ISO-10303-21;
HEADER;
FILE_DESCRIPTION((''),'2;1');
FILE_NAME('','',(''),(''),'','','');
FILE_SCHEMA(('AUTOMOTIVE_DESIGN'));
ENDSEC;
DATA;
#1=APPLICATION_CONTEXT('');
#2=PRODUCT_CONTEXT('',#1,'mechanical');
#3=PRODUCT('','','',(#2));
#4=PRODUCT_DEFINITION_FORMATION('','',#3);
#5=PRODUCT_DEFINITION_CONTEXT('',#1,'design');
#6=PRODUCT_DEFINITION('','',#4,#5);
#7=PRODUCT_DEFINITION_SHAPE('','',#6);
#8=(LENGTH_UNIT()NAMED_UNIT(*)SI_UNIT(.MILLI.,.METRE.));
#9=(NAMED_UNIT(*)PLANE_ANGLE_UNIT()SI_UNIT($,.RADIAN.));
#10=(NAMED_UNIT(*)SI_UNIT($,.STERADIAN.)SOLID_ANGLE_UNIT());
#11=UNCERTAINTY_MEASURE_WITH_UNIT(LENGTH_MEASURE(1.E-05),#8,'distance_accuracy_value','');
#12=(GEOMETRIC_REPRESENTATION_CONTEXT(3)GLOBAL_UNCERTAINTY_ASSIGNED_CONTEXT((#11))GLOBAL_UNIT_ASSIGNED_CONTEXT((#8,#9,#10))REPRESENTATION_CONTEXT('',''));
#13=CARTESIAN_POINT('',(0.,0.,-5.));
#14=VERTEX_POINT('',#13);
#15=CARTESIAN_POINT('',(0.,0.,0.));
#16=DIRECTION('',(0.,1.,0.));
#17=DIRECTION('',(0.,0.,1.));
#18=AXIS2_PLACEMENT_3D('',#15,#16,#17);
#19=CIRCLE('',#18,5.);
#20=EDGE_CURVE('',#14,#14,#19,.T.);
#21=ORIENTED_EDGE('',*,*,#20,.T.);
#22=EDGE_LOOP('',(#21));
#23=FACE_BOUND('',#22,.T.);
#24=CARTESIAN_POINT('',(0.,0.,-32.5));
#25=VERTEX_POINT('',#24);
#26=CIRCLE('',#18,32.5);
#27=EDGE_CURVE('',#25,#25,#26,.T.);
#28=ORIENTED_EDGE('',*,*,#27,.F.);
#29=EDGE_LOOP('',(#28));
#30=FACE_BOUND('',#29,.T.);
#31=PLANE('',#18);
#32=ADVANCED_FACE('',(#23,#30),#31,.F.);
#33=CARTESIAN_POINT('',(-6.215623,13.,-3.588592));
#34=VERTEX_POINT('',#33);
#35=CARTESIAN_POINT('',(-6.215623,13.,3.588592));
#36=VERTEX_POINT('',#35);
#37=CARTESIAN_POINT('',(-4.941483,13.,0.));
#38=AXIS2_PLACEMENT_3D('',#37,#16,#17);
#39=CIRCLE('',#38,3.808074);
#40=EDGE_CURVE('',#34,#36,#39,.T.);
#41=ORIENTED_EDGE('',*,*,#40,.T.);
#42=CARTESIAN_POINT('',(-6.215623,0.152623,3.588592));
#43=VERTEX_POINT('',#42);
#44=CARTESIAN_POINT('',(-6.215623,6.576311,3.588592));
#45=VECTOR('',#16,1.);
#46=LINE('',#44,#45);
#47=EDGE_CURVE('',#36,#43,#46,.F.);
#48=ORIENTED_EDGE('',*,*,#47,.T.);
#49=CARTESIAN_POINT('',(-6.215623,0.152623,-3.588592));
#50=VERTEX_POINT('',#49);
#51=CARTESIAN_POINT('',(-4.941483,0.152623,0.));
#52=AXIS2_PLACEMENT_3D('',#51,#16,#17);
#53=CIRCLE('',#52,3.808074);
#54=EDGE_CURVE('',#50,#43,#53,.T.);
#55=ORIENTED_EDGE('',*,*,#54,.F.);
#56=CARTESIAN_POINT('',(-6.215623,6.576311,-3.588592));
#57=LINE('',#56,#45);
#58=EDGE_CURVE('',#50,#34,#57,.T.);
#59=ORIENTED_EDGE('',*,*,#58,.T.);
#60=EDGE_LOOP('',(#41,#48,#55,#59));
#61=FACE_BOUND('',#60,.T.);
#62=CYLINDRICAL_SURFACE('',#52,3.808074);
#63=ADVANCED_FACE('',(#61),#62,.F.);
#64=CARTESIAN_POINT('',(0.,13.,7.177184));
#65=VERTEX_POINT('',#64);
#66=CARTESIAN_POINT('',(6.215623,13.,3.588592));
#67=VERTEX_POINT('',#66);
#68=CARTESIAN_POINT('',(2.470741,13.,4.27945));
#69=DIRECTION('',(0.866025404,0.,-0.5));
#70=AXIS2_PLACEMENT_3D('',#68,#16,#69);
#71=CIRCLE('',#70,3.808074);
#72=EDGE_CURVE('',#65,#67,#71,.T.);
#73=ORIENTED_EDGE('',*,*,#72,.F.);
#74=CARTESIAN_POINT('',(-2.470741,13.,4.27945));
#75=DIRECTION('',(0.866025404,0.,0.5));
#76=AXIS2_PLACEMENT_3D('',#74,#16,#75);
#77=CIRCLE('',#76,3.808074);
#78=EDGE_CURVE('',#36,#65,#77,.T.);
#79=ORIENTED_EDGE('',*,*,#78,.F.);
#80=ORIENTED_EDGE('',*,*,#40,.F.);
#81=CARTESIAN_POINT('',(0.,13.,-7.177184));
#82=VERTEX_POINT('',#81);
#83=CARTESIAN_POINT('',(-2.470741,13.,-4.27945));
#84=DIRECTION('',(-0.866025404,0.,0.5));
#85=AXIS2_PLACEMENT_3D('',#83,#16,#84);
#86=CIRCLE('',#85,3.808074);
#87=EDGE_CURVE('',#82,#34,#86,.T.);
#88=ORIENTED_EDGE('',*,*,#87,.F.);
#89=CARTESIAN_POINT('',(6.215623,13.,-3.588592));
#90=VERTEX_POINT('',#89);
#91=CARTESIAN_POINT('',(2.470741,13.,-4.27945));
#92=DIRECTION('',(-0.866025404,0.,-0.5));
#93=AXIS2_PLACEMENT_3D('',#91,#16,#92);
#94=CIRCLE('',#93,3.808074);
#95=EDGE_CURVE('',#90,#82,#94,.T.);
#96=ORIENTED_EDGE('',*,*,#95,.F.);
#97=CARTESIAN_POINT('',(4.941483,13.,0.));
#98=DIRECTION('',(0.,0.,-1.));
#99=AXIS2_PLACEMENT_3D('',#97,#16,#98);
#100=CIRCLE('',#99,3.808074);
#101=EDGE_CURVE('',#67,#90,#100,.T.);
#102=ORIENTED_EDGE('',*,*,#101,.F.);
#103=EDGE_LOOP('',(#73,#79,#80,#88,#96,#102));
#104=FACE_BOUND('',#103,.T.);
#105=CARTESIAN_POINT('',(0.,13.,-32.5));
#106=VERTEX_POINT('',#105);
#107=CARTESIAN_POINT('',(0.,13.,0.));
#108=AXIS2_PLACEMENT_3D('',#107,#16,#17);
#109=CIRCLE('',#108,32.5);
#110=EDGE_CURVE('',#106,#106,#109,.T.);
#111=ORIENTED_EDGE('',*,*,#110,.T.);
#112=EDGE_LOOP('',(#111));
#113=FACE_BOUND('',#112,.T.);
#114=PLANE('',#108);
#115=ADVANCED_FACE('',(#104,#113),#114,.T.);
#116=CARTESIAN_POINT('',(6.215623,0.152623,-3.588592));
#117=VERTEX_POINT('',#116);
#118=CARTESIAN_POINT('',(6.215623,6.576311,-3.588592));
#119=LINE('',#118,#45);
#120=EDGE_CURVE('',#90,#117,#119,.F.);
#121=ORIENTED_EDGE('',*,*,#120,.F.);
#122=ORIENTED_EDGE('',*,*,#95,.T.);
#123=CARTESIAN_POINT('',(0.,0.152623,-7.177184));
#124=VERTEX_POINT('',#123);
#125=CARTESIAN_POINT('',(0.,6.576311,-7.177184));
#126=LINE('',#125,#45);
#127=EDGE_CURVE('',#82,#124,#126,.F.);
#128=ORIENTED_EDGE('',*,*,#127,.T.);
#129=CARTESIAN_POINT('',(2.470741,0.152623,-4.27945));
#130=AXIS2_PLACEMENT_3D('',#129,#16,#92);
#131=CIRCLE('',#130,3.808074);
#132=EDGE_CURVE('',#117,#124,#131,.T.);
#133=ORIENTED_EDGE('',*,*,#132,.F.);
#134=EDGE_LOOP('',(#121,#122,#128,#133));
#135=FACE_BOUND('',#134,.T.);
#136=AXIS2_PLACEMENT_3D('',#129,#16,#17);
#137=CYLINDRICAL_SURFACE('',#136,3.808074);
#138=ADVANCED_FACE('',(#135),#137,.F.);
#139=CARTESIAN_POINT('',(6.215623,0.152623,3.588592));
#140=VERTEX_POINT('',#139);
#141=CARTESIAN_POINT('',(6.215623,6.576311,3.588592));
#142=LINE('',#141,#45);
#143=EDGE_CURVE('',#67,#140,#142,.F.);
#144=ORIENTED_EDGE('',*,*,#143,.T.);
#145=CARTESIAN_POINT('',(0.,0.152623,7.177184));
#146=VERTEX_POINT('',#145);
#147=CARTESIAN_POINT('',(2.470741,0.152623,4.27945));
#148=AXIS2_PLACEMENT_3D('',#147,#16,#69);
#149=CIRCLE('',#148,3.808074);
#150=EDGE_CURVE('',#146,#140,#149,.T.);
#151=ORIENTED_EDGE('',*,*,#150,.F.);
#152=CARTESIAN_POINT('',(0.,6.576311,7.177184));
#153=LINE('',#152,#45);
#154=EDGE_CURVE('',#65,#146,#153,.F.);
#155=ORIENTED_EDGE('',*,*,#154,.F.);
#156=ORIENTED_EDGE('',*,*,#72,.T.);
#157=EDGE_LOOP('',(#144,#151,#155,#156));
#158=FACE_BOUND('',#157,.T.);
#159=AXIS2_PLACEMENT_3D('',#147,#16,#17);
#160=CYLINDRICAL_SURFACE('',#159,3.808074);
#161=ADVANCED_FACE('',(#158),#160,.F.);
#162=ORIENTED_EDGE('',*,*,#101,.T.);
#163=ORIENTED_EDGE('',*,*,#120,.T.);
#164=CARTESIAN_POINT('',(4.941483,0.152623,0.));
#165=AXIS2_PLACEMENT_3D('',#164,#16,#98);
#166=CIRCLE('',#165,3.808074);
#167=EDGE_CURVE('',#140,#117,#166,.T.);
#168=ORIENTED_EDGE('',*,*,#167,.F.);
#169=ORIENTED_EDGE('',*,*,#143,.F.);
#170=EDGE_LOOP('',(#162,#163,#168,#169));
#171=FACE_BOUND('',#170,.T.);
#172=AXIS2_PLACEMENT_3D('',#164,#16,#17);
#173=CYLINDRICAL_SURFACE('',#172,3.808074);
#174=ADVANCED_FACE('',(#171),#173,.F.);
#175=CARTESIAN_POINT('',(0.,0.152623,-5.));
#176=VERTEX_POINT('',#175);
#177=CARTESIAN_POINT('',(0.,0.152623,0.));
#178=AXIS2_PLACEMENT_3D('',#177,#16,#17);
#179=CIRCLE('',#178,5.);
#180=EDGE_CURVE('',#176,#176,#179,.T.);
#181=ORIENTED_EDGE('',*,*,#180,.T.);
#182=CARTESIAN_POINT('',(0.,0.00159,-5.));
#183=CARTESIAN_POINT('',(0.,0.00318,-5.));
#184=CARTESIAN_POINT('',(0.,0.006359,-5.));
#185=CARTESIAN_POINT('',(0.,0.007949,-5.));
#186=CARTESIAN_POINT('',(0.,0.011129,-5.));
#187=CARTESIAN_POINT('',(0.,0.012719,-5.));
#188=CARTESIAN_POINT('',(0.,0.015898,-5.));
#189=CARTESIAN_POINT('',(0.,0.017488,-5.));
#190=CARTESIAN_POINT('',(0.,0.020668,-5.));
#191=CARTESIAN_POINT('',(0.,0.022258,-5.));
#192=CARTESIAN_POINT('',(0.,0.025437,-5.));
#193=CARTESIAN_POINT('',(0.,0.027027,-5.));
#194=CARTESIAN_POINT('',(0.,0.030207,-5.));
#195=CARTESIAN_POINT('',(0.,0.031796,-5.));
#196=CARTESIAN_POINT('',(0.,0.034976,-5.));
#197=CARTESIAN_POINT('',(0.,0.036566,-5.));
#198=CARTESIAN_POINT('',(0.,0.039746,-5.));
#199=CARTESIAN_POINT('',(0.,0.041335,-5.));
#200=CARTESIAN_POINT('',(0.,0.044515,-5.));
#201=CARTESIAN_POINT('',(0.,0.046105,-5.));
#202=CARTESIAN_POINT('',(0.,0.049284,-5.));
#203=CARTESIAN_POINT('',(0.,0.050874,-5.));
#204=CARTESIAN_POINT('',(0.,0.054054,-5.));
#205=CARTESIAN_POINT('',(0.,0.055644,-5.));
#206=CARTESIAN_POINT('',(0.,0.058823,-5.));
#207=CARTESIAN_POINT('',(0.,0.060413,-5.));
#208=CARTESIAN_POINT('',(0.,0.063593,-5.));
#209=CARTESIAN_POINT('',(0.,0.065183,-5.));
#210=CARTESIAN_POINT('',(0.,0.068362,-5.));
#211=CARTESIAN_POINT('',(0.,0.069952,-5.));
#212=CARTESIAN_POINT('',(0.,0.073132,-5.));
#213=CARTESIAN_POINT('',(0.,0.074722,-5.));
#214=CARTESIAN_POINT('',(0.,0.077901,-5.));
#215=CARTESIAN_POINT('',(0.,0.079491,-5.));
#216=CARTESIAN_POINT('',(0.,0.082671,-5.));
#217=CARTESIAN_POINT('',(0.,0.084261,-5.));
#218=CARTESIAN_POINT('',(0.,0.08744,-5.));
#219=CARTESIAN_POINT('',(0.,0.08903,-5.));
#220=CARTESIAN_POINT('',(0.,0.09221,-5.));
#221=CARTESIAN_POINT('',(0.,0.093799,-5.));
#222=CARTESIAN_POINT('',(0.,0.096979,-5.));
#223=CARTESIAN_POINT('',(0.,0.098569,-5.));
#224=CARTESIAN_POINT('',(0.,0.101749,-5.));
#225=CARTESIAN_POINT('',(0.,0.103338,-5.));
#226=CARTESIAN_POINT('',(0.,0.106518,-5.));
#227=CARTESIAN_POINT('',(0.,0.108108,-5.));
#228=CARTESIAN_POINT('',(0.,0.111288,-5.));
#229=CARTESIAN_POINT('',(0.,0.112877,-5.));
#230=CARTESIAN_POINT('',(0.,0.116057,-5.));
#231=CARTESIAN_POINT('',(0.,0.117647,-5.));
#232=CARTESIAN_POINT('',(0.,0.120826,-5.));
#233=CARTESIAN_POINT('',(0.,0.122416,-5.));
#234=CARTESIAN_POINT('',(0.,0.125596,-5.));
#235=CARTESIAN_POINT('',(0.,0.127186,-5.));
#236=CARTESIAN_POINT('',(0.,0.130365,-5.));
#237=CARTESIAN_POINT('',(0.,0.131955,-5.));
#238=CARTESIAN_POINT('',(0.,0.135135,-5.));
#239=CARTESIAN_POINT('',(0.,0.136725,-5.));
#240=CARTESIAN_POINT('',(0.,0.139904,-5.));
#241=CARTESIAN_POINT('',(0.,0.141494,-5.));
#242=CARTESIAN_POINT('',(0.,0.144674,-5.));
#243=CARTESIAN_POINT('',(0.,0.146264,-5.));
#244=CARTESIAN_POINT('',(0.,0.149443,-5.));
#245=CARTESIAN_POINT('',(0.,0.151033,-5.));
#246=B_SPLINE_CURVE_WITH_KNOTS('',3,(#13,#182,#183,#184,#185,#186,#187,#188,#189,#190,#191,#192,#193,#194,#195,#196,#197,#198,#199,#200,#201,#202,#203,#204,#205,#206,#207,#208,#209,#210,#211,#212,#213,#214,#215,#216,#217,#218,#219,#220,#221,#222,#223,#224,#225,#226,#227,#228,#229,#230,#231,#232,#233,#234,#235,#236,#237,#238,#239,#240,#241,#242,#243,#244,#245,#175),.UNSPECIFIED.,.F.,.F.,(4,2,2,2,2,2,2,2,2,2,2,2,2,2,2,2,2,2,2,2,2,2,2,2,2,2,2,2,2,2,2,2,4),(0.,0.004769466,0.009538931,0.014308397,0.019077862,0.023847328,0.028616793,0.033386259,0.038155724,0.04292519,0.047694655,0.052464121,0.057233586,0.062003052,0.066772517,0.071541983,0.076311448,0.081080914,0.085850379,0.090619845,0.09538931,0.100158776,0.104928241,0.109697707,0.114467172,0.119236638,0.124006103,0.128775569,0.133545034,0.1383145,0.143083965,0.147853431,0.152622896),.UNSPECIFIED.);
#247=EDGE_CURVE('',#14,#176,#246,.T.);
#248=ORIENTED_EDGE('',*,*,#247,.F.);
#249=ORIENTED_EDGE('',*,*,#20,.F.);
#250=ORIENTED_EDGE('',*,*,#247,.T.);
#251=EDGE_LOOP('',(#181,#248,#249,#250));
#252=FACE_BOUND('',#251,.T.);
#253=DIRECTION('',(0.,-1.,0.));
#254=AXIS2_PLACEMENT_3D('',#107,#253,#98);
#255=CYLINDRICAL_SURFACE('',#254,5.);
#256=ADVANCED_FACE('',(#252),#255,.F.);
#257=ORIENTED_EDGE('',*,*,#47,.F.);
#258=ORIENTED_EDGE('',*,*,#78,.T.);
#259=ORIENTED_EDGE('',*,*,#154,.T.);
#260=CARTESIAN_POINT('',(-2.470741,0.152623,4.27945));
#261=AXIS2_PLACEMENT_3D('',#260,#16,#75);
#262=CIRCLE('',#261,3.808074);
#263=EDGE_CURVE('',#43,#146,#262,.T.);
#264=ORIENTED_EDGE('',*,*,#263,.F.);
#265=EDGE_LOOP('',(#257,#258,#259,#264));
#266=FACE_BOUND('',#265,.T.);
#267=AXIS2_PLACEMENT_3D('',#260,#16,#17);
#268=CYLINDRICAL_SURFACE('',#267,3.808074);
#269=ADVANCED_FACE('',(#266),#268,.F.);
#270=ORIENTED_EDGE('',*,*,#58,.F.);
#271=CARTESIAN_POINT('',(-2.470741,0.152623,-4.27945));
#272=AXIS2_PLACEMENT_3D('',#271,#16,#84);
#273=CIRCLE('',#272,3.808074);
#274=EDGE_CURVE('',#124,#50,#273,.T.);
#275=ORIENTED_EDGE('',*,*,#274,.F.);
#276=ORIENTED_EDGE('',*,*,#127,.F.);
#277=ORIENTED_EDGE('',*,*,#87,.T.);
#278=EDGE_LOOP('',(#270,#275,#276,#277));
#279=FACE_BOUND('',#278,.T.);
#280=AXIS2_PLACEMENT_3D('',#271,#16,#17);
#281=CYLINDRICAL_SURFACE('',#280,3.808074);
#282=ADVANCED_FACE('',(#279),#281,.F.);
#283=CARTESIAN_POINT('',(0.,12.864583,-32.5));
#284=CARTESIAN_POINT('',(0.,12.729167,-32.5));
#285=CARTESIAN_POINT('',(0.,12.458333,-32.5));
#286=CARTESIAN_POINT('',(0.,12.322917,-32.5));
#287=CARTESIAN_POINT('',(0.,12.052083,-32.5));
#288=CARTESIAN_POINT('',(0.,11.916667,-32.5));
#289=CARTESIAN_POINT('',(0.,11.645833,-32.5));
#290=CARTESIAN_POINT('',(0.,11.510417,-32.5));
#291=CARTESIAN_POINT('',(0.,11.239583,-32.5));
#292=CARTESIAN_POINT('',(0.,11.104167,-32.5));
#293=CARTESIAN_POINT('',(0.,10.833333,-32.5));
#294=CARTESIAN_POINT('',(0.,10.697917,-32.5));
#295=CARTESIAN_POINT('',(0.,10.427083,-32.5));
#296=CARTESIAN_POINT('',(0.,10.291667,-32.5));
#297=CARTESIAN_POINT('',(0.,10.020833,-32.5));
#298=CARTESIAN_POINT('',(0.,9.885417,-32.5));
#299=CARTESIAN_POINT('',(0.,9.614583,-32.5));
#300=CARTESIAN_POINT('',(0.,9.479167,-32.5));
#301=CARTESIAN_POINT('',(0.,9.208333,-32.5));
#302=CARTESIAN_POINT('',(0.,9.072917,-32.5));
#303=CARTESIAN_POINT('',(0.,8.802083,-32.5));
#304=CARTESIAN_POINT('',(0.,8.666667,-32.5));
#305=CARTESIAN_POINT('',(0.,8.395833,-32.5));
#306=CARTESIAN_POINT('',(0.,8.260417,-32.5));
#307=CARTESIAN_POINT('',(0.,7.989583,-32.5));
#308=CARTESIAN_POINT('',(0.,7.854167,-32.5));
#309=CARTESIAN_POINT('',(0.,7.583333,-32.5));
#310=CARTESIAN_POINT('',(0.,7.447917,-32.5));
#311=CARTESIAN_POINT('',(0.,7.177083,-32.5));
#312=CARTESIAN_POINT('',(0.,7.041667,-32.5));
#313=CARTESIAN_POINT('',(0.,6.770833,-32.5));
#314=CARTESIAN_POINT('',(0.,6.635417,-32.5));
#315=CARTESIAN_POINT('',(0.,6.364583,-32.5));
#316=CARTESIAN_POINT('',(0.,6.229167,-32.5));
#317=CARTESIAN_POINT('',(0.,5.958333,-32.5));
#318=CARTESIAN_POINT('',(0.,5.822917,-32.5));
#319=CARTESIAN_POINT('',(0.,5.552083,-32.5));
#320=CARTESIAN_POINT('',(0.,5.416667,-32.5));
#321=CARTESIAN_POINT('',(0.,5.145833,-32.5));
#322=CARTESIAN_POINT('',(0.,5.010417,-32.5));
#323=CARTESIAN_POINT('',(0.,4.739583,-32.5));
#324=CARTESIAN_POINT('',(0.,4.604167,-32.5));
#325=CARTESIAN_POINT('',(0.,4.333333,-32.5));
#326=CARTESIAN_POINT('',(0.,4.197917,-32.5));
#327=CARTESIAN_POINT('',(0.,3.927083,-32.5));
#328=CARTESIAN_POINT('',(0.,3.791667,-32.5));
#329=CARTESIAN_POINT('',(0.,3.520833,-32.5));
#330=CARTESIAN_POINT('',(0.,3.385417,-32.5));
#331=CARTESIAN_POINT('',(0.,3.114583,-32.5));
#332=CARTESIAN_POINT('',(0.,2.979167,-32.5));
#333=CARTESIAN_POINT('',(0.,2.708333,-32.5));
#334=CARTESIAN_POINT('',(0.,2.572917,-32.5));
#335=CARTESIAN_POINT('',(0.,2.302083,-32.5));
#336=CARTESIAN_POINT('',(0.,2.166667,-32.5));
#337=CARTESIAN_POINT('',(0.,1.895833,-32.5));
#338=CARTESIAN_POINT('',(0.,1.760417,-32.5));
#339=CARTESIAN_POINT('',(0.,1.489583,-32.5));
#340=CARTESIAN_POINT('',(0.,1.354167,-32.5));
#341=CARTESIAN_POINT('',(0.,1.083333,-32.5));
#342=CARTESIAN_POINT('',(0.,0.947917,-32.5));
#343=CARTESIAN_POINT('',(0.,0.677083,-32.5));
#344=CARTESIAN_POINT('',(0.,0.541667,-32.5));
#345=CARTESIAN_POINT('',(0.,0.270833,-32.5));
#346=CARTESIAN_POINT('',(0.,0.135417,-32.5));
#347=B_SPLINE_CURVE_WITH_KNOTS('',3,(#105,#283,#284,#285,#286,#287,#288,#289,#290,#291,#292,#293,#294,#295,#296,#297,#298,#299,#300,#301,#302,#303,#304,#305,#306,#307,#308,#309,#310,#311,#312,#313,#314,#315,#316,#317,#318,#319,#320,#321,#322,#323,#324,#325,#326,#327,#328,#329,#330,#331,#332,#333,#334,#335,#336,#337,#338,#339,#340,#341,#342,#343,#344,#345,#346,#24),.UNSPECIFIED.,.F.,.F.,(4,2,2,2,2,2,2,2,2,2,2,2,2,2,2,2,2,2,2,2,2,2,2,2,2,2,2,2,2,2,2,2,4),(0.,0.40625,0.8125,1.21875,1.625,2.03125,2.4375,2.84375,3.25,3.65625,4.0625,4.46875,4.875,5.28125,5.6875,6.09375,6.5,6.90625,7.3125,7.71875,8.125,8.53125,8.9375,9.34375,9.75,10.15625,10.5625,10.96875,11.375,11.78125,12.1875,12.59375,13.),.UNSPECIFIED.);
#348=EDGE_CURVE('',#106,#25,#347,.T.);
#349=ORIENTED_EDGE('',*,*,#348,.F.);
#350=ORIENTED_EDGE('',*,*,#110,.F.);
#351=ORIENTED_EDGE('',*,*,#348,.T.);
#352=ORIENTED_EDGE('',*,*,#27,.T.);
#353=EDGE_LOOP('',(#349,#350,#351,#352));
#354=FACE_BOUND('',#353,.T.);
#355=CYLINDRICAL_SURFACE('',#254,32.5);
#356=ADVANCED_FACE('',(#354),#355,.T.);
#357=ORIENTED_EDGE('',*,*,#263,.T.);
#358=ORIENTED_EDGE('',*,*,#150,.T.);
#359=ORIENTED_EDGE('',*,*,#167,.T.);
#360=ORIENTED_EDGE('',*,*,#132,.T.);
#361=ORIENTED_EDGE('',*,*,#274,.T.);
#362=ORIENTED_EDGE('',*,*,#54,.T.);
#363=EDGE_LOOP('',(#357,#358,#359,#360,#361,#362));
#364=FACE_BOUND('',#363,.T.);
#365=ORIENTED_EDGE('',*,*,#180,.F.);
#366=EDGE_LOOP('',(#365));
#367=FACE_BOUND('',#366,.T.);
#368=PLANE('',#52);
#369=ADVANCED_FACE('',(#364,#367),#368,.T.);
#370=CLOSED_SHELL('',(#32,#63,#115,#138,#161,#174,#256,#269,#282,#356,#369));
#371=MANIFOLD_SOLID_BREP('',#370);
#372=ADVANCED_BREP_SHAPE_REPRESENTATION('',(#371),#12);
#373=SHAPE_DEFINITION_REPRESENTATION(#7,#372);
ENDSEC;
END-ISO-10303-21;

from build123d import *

# Parameters (mm, degrees)
SKETCH1_R           = 32.5
BOSS_EXTRUDE1_DEPTH = 13
SKETCH2_R           = 5
CUT_EXTRUDE1_DEPTH  = 48.765049984
SKETCH3_R           = 3.808073824
CUT_EXTRUDE2_DEPTH  = 12.847377104
CIRPATTERN1_COUNT   = 6


with BuildPart() as part:
    # Sketch1 → Boss-Extrude1 (new body)
    with BuildSketch(Plane(origin=(0, 0, 0), x_dir=(1, 0, 0), z_dir=(0, 1, 0))):
        Circle(SKETCH1_R)
    extrude(amount=BOSS_EXTRUDE1_DEPTH)

    # Sketch2 → Cut-Extrude1 (cut, through all)
    with BuildSketch(Plane(origin=(0, 0, 0), x_dir=(1, 0, 0), z_dir=(0, 1, 0))):
        Circle(SKETCH2_R)
    extrude(amount=CUT_EXTRUDE1_DEPTH, mode=Mode.SUBTRACT)

    # Sketch3 → Cut-Extrude2 (cut)
    with BuildSketch(Plane(origin=(0, 13, 0), x_dir=(1, 0, 0), z_dir=(0, 1, 0))):
        with Locations((-4.941482649, 0)):
            Circle(SKETCH3_R)
    cut_extrude2 = extrude(amount=-CUT_EXTRUDE2_DEPTH, mode=Mode.SUBTRACT)

    # CirPattern1: Cut-Extrude2 ×6 about axis
    cirpattern1_axis = Axis((0, 0, 0), (0, 1, 0))
    for i in range(1, CIRPATTERN1_COUNT):
        add(cut_extrude2.rotate(cirpattern1_axis, i * 360 / CIRPATTERN1_COUNT), mode=Mode.SUBTRACT)


solid = part.part
